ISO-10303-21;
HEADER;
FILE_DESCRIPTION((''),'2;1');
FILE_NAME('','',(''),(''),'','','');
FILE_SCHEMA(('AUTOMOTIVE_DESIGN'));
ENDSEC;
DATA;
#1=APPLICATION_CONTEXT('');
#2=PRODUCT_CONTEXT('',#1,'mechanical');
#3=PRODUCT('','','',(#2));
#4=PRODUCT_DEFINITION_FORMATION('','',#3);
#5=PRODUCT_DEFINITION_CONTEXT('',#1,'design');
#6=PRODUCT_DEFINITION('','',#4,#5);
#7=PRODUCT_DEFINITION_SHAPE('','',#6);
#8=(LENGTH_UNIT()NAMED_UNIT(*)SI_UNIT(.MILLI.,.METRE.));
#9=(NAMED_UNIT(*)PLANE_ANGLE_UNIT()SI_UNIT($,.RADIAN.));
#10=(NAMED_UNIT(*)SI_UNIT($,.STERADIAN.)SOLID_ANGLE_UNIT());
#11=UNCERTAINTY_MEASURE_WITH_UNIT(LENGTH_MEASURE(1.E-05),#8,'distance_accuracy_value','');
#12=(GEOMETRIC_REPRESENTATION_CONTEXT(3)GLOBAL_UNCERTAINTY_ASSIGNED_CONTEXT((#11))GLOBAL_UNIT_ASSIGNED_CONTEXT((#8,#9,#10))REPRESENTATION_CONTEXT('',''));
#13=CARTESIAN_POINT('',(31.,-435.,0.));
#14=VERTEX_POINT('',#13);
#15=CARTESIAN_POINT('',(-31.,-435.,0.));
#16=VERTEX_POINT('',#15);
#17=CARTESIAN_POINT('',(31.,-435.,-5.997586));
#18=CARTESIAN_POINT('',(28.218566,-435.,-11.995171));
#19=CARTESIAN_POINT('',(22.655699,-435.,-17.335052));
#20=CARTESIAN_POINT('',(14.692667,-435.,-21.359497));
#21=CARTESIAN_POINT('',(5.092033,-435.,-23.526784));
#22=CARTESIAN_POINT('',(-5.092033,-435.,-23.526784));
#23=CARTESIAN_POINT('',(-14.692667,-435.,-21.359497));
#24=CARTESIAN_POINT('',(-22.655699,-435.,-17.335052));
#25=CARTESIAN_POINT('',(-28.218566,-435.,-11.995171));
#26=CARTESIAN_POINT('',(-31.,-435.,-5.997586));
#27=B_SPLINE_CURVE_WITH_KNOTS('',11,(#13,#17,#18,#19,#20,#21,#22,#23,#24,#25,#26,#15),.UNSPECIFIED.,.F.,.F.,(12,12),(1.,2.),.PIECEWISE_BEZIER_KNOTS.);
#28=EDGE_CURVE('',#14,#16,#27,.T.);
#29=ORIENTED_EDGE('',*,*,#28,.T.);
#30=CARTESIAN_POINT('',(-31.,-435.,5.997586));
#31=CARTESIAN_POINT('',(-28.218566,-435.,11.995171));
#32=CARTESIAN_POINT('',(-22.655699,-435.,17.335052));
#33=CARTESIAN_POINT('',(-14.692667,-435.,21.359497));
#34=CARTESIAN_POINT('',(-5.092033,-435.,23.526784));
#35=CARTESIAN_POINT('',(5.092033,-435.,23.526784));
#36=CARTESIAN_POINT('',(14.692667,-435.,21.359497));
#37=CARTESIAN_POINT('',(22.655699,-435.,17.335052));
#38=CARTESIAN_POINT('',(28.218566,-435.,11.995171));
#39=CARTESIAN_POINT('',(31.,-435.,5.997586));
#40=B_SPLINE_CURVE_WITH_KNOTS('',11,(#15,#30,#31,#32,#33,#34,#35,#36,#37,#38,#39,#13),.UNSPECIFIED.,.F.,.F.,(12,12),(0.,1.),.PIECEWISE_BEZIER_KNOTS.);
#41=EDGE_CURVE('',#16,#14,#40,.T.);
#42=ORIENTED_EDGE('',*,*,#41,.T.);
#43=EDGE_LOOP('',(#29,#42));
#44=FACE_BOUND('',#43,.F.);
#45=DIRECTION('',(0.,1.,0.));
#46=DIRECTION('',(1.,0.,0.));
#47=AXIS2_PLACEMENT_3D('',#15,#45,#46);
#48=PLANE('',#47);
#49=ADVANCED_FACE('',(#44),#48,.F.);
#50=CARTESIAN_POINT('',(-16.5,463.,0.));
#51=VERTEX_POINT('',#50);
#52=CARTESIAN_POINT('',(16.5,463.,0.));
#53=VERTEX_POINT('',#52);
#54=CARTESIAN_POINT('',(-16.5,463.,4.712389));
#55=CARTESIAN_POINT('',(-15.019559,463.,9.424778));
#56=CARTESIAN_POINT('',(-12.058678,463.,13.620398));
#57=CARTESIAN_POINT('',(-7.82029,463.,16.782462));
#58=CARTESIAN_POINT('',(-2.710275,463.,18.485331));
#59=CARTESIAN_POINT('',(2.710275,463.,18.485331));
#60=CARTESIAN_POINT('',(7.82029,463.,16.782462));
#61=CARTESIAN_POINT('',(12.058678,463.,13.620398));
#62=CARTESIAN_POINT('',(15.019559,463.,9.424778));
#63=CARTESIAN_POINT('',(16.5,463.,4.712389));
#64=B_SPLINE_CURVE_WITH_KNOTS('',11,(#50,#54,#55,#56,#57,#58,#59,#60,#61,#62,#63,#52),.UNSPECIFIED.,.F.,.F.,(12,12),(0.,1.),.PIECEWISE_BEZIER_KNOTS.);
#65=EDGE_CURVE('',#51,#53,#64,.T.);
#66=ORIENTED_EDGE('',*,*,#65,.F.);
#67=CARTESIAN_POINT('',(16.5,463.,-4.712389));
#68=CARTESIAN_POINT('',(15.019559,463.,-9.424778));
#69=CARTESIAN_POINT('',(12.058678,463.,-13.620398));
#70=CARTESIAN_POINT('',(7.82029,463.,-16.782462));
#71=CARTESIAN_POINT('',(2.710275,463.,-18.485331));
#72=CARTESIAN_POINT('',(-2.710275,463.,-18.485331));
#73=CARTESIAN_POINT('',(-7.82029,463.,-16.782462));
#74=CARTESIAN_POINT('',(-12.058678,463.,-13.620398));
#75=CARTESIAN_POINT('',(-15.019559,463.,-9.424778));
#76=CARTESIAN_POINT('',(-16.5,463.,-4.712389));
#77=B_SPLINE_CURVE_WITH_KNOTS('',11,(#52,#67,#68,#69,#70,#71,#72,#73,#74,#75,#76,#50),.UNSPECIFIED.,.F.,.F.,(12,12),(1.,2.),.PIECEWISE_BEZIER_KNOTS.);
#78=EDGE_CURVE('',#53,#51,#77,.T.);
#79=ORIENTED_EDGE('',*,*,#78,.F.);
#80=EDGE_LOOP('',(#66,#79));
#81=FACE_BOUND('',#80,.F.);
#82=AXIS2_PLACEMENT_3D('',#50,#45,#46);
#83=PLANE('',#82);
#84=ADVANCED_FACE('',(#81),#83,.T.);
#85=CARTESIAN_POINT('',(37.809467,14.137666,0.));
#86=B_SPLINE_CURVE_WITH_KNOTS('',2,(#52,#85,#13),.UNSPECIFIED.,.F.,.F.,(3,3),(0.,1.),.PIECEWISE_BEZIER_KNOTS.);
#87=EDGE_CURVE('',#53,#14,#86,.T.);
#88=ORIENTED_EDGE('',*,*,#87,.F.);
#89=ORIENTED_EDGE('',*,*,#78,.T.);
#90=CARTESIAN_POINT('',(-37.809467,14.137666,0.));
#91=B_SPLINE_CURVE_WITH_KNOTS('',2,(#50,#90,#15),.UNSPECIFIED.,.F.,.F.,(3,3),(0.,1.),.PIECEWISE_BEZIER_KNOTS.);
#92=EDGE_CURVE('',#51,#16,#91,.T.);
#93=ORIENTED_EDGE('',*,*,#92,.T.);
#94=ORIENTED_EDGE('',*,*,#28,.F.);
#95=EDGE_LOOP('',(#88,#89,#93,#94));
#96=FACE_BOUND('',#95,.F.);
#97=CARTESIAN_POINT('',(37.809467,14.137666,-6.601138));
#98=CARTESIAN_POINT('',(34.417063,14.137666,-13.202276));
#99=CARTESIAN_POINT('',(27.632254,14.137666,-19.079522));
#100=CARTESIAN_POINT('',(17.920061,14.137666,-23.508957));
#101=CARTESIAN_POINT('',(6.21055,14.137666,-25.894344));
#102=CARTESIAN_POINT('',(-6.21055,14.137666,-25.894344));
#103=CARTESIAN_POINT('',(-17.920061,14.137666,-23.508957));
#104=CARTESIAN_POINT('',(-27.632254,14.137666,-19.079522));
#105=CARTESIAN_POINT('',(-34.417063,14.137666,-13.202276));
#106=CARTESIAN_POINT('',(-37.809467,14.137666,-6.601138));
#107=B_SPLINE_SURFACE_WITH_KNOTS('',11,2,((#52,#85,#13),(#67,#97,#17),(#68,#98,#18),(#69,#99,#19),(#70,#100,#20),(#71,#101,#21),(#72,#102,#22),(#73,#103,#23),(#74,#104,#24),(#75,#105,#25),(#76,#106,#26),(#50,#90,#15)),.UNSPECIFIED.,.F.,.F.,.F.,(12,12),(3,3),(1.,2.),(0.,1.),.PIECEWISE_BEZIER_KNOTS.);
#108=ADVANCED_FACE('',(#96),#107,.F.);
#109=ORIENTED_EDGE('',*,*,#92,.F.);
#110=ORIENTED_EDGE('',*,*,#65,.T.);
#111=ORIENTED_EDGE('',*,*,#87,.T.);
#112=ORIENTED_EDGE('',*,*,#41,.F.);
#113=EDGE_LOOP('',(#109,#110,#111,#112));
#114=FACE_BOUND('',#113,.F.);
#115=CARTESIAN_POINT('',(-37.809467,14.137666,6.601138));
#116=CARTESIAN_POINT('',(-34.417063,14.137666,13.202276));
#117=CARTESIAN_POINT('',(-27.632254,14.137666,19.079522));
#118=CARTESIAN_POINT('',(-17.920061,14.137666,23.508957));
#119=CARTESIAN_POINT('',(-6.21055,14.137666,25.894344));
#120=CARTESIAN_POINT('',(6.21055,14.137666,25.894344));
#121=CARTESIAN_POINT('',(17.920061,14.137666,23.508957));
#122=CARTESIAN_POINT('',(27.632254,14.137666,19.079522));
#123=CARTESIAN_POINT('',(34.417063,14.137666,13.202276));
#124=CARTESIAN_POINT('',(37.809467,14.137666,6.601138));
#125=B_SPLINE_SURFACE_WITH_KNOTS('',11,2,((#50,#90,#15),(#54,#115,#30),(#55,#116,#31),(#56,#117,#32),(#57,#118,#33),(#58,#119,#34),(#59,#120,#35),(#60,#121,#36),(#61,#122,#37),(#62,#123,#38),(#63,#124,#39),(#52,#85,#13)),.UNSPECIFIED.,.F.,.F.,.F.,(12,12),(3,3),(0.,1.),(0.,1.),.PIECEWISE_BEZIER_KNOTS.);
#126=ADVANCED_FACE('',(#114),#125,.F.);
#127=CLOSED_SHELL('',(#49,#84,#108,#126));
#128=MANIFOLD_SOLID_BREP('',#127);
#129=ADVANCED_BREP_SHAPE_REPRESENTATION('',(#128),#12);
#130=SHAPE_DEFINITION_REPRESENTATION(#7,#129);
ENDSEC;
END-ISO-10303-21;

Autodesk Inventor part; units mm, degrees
ref_plane "YZ Plane" through (0, 0, 0) normal (1, 0, 0) x (0, 1, 0)
ref_plane "XY Plane" through (0, 0, 0) normal (0, 0, 1) x (1, 0, 0)
sketch "Sketch1" plane through (0, 0, 0) normal (0, 1, 0) x (-1, 0, 0)
  ellipse E0 centre (0, 0) end of major axis (31, 0) minor radius 21
  dimension "d8" = 21
  dimension "d9" = 31
ref_plane "Work Plane1" through (0, 463, 0) normal (0, 1, 0) x (-1, 0, 0)
sketch "Sketch2" plane through (0, 463, 0) normal (0, 1, 0) x (-1, 0, 0)
  circle A0 centre (0, 0) radius 16
  dimension "d57" = 32
sketch "Sketch3" plane through (0, 463, 0) normal (0, 1, 0) x (-1, 0, 0)
  circle A0 centre (0, 0) radius 16.5
  dimension "d58" = 33
sketch "Sketch4" plane through (0, 0, 0) normal (0, 1, 0) x (-1, 0, 0)
  ellipse E0 centre (0, 0) end of major axis (0, 20) minor radius 30
  dimension "d19" = 20
  dimension "d20" = 30
ref_plane "Work Plane3" through (0, -435, 0) normal (0, 1, 0) x (-1, 0, 0)
ref_plane "Work Plane2" through (0, -455, 0) normal (0, 1, 0) x (-1, 0, 0)
sketch "Sketch5" plane through (0, -435, 0) normal (0, 1, 0) x (-1, 0, 0)
  ellipse E0 centre (0, 0) end of major axis (-31, 0) minor radius 21
  dimension "d27" = 21
  dimension "d28" = 31
sketch "Sketch6" plane through (0, -435, 0) normal (0, 1, 0) x (-1, 0, 0)
  ellipse E0 centre (0, 0) end of major axis (-40, 0) minor radius 30
  dimension "d29" = 40
  dimension "d30" = 30
sketch "Sketch7" plane through (0, -455, 0) normal (0, 1, 0) x (-1, 0, 0)
  circle A0 centre (0, 0) radius 5
  dimension "d31" = 10
sketch "Sketch8" plane through (0, -455, 0) normal (0, 1, 0) x (-1, 0, 0)
  circle A0 centre (0, 0) radius 6
  dimension "d32" = 12
loft "Loft9" add profiles "Sketch3", "Sketch1", "Sketch5"
properties part number "fuselage"
